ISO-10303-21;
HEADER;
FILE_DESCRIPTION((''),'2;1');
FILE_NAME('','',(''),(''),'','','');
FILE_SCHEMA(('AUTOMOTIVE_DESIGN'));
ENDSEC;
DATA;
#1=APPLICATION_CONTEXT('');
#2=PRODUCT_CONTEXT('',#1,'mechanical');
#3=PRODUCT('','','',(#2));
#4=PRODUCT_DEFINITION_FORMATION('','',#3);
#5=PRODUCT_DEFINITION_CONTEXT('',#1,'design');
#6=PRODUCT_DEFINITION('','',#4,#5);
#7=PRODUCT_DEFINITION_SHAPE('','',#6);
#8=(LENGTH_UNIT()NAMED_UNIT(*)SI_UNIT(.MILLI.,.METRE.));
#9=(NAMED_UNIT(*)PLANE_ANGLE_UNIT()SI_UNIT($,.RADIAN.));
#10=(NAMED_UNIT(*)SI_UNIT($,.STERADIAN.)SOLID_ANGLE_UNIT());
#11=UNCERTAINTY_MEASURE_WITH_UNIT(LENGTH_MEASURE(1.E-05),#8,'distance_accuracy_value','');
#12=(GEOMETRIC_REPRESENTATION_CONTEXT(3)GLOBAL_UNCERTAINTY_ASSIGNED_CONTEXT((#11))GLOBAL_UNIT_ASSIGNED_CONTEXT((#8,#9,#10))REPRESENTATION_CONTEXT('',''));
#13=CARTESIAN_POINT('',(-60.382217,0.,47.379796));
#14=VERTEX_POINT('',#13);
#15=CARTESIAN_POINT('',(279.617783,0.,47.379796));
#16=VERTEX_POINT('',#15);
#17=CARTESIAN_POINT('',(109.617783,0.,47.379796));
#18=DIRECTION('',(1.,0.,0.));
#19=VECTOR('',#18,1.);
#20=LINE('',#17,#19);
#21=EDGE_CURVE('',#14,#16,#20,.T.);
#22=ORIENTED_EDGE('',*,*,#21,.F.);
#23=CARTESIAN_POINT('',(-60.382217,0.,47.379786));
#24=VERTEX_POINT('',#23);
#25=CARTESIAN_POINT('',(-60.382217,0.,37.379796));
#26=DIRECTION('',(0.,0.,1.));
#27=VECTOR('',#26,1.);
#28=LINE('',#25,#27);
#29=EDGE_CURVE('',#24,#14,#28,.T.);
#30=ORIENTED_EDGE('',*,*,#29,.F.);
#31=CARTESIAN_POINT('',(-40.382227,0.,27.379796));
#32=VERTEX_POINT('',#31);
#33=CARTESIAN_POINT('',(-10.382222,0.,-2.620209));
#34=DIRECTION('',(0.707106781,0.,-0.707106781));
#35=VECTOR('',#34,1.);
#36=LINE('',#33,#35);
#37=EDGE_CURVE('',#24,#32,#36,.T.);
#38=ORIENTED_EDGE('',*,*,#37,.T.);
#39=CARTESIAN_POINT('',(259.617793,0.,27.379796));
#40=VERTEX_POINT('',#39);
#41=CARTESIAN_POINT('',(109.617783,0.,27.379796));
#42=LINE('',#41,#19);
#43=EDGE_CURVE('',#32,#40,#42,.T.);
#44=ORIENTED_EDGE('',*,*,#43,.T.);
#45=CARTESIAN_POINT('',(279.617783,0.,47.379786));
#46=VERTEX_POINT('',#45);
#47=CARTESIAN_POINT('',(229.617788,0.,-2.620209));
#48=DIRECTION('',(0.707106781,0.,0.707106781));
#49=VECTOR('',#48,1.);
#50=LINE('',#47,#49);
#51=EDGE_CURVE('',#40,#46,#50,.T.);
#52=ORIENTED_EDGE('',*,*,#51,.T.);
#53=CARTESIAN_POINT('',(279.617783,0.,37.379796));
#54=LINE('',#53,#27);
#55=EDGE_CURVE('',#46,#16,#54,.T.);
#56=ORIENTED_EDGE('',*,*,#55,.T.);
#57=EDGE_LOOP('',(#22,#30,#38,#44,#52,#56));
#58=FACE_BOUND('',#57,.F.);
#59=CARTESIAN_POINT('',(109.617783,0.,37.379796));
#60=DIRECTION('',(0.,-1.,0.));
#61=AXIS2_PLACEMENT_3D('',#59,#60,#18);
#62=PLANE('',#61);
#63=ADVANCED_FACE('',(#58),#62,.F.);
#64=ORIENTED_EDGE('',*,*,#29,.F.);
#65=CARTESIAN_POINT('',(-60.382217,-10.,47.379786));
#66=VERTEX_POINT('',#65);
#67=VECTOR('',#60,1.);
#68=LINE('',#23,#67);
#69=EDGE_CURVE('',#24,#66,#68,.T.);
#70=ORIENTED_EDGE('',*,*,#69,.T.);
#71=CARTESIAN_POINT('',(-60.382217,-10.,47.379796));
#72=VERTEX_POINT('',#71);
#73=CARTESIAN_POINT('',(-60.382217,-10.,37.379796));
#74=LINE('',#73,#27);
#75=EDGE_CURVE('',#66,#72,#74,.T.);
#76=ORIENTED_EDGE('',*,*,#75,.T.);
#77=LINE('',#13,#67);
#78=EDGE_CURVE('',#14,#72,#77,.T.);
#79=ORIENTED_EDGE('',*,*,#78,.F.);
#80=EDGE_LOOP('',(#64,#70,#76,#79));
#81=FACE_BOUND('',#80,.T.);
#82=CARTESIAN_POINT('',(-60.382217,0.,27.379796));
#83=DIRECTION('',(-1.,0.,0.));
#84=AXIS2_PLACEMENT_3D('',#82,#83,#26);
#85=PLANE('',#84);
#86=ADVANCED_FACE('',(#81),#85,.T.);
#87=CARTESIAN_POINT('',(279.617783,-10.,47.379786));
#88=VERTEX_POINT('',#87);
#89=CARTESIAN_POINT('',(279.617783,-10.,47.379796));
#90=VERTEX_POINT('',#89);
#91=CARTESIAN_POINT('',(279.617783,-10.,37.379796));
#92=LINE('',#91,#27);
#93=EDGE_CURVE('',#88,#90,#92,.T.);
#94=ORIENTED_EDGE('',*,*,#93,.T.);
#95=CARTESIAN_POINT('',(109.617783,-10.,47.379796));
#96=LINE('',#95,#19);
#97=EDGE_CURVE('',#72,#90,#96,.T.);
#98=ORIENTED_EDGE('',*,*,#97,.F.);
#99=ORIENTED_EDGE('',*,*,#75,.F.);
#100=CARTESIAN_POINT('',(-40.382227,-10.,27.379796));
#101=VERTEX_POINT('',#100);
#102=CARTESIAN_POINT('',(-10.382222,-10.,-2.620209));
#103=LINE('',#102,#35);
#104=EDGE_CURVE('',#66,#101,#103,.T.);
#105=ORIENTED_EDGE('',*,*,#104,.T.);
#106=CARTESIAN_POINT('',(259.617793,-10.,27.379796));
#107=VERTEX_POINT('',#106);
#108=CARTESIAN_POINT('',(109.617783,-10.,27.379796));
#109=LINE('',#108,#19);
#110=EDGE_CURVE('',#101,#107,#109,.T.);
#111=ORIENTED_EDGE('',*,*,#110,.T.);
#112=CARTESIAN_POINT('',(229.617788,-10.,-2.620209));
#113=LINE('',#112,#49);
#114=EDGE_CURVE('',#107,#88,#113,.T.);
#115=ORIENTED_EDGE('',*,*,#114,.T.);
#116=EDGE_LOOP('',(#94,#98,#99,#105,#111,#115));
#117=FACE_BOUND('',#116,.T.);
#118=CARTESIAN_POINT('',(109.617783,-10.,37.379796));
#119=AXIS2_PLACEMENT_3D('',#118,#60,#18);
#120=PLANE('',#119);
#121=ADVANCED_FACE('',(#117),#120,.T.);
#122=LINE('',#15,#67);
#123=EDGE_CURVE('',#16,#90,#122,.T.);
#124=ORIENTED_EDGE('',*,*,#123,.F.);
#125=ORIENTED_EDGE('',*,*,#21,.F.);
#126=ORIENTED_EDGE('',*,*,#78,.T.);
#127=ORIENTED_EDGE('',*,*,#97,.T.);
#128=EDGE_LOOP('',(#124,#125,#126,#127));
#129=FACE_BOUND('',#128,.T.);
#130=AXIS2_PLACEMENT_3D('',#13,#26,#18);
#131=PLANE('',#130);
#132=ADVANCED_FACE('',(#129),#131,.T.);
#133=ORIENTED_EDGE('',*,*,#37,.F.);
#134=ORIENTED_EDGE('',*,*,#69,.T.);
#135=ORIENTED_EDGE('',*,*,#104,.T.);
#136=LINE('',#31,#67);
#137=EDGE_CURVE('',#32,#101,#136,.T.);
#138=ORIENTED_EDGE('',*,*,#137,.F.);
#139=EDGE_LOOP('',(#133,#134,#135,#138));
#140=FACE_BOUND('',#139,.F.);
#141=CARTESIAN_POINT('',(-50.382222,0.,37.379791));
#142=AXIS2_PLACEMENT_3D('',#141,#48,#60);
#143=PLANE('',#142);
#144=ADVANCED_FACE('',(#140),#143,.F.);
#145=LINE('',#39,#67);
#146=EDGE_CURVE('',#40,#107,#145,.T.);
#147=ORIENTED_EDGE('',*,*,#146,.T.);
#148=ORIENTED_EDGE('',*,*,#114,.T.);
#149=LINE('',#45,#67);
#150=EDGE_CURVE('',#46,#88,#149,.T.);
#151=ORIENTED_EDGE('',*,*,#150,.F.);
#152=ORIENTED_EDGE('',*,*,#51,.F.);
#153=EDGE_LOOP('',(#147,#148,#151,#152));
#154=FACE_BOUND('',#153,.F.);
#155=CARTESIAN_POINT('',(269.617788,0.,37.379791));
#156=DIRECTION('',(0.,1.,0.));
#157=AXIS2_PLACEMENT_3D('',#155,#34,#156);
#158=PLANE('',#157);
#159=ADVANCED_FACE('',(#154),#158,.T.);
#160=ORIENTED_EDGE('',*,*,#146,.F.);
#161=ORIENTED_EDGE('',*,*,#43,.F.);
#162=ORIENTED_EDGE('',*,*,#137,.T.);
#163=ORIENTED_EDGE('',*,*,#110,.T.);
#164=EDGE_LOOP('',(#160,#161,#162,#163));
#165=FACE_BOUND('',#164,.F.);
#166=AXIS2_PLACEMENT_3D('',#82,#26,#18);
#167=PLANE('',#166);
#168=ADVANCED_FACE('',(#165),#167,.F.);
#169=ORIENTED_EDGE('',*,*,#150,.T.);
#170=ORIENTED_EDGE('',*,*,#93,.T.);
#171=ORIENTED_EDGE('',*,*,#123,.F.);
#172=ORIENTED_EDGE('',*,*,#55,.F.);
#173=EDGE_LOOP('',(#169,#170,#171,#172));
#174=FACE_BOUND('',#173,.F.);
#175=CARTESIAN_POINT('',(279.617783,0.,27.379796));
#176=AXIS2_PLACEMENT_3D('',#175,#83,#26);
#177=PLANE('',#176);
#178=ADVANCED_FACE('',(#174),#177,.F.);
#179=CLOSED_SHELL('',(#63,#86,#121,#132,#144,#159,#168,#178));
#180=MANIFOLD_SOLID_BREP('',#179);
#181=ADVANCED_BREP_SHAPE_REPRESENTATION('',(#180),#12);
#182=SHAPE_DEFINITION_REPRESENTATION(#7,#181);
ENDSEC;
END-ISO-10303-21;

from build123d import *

# Parameters (mm, degrees)
F0_W     = 340
F0_H     = 20
F1_DEPTH = 10
F2_SIZE  = 19.99999


# Not quite as in the source:
# - a fillet or chamfer is up to 0.001 mm smaller than in the source, because OpenCascade refuses the exact size


with BuildPart() as f1:
    # F0 (on Front) → F1 (new body)
    with BuildSketch(Plane.XZ):
        with Locations((109.6177828312, 37.3797959089)):
            Rectangle(F0_W, F0_H)
    extrude(amount=F1_DEPTH)

    # F2 (size 20 in the source; OpenCascade refuses exactly that, so slightly less here)
    f2_edges = [f1.edges().sort_by_distance(p)[0] for p in [
        (-60.382217, -5, 27.379796),
        (279.617783, -5, 27.379796),
    ]]
    chamfer(f2_edges, length=F2_SIZE)


solid = f1.part
